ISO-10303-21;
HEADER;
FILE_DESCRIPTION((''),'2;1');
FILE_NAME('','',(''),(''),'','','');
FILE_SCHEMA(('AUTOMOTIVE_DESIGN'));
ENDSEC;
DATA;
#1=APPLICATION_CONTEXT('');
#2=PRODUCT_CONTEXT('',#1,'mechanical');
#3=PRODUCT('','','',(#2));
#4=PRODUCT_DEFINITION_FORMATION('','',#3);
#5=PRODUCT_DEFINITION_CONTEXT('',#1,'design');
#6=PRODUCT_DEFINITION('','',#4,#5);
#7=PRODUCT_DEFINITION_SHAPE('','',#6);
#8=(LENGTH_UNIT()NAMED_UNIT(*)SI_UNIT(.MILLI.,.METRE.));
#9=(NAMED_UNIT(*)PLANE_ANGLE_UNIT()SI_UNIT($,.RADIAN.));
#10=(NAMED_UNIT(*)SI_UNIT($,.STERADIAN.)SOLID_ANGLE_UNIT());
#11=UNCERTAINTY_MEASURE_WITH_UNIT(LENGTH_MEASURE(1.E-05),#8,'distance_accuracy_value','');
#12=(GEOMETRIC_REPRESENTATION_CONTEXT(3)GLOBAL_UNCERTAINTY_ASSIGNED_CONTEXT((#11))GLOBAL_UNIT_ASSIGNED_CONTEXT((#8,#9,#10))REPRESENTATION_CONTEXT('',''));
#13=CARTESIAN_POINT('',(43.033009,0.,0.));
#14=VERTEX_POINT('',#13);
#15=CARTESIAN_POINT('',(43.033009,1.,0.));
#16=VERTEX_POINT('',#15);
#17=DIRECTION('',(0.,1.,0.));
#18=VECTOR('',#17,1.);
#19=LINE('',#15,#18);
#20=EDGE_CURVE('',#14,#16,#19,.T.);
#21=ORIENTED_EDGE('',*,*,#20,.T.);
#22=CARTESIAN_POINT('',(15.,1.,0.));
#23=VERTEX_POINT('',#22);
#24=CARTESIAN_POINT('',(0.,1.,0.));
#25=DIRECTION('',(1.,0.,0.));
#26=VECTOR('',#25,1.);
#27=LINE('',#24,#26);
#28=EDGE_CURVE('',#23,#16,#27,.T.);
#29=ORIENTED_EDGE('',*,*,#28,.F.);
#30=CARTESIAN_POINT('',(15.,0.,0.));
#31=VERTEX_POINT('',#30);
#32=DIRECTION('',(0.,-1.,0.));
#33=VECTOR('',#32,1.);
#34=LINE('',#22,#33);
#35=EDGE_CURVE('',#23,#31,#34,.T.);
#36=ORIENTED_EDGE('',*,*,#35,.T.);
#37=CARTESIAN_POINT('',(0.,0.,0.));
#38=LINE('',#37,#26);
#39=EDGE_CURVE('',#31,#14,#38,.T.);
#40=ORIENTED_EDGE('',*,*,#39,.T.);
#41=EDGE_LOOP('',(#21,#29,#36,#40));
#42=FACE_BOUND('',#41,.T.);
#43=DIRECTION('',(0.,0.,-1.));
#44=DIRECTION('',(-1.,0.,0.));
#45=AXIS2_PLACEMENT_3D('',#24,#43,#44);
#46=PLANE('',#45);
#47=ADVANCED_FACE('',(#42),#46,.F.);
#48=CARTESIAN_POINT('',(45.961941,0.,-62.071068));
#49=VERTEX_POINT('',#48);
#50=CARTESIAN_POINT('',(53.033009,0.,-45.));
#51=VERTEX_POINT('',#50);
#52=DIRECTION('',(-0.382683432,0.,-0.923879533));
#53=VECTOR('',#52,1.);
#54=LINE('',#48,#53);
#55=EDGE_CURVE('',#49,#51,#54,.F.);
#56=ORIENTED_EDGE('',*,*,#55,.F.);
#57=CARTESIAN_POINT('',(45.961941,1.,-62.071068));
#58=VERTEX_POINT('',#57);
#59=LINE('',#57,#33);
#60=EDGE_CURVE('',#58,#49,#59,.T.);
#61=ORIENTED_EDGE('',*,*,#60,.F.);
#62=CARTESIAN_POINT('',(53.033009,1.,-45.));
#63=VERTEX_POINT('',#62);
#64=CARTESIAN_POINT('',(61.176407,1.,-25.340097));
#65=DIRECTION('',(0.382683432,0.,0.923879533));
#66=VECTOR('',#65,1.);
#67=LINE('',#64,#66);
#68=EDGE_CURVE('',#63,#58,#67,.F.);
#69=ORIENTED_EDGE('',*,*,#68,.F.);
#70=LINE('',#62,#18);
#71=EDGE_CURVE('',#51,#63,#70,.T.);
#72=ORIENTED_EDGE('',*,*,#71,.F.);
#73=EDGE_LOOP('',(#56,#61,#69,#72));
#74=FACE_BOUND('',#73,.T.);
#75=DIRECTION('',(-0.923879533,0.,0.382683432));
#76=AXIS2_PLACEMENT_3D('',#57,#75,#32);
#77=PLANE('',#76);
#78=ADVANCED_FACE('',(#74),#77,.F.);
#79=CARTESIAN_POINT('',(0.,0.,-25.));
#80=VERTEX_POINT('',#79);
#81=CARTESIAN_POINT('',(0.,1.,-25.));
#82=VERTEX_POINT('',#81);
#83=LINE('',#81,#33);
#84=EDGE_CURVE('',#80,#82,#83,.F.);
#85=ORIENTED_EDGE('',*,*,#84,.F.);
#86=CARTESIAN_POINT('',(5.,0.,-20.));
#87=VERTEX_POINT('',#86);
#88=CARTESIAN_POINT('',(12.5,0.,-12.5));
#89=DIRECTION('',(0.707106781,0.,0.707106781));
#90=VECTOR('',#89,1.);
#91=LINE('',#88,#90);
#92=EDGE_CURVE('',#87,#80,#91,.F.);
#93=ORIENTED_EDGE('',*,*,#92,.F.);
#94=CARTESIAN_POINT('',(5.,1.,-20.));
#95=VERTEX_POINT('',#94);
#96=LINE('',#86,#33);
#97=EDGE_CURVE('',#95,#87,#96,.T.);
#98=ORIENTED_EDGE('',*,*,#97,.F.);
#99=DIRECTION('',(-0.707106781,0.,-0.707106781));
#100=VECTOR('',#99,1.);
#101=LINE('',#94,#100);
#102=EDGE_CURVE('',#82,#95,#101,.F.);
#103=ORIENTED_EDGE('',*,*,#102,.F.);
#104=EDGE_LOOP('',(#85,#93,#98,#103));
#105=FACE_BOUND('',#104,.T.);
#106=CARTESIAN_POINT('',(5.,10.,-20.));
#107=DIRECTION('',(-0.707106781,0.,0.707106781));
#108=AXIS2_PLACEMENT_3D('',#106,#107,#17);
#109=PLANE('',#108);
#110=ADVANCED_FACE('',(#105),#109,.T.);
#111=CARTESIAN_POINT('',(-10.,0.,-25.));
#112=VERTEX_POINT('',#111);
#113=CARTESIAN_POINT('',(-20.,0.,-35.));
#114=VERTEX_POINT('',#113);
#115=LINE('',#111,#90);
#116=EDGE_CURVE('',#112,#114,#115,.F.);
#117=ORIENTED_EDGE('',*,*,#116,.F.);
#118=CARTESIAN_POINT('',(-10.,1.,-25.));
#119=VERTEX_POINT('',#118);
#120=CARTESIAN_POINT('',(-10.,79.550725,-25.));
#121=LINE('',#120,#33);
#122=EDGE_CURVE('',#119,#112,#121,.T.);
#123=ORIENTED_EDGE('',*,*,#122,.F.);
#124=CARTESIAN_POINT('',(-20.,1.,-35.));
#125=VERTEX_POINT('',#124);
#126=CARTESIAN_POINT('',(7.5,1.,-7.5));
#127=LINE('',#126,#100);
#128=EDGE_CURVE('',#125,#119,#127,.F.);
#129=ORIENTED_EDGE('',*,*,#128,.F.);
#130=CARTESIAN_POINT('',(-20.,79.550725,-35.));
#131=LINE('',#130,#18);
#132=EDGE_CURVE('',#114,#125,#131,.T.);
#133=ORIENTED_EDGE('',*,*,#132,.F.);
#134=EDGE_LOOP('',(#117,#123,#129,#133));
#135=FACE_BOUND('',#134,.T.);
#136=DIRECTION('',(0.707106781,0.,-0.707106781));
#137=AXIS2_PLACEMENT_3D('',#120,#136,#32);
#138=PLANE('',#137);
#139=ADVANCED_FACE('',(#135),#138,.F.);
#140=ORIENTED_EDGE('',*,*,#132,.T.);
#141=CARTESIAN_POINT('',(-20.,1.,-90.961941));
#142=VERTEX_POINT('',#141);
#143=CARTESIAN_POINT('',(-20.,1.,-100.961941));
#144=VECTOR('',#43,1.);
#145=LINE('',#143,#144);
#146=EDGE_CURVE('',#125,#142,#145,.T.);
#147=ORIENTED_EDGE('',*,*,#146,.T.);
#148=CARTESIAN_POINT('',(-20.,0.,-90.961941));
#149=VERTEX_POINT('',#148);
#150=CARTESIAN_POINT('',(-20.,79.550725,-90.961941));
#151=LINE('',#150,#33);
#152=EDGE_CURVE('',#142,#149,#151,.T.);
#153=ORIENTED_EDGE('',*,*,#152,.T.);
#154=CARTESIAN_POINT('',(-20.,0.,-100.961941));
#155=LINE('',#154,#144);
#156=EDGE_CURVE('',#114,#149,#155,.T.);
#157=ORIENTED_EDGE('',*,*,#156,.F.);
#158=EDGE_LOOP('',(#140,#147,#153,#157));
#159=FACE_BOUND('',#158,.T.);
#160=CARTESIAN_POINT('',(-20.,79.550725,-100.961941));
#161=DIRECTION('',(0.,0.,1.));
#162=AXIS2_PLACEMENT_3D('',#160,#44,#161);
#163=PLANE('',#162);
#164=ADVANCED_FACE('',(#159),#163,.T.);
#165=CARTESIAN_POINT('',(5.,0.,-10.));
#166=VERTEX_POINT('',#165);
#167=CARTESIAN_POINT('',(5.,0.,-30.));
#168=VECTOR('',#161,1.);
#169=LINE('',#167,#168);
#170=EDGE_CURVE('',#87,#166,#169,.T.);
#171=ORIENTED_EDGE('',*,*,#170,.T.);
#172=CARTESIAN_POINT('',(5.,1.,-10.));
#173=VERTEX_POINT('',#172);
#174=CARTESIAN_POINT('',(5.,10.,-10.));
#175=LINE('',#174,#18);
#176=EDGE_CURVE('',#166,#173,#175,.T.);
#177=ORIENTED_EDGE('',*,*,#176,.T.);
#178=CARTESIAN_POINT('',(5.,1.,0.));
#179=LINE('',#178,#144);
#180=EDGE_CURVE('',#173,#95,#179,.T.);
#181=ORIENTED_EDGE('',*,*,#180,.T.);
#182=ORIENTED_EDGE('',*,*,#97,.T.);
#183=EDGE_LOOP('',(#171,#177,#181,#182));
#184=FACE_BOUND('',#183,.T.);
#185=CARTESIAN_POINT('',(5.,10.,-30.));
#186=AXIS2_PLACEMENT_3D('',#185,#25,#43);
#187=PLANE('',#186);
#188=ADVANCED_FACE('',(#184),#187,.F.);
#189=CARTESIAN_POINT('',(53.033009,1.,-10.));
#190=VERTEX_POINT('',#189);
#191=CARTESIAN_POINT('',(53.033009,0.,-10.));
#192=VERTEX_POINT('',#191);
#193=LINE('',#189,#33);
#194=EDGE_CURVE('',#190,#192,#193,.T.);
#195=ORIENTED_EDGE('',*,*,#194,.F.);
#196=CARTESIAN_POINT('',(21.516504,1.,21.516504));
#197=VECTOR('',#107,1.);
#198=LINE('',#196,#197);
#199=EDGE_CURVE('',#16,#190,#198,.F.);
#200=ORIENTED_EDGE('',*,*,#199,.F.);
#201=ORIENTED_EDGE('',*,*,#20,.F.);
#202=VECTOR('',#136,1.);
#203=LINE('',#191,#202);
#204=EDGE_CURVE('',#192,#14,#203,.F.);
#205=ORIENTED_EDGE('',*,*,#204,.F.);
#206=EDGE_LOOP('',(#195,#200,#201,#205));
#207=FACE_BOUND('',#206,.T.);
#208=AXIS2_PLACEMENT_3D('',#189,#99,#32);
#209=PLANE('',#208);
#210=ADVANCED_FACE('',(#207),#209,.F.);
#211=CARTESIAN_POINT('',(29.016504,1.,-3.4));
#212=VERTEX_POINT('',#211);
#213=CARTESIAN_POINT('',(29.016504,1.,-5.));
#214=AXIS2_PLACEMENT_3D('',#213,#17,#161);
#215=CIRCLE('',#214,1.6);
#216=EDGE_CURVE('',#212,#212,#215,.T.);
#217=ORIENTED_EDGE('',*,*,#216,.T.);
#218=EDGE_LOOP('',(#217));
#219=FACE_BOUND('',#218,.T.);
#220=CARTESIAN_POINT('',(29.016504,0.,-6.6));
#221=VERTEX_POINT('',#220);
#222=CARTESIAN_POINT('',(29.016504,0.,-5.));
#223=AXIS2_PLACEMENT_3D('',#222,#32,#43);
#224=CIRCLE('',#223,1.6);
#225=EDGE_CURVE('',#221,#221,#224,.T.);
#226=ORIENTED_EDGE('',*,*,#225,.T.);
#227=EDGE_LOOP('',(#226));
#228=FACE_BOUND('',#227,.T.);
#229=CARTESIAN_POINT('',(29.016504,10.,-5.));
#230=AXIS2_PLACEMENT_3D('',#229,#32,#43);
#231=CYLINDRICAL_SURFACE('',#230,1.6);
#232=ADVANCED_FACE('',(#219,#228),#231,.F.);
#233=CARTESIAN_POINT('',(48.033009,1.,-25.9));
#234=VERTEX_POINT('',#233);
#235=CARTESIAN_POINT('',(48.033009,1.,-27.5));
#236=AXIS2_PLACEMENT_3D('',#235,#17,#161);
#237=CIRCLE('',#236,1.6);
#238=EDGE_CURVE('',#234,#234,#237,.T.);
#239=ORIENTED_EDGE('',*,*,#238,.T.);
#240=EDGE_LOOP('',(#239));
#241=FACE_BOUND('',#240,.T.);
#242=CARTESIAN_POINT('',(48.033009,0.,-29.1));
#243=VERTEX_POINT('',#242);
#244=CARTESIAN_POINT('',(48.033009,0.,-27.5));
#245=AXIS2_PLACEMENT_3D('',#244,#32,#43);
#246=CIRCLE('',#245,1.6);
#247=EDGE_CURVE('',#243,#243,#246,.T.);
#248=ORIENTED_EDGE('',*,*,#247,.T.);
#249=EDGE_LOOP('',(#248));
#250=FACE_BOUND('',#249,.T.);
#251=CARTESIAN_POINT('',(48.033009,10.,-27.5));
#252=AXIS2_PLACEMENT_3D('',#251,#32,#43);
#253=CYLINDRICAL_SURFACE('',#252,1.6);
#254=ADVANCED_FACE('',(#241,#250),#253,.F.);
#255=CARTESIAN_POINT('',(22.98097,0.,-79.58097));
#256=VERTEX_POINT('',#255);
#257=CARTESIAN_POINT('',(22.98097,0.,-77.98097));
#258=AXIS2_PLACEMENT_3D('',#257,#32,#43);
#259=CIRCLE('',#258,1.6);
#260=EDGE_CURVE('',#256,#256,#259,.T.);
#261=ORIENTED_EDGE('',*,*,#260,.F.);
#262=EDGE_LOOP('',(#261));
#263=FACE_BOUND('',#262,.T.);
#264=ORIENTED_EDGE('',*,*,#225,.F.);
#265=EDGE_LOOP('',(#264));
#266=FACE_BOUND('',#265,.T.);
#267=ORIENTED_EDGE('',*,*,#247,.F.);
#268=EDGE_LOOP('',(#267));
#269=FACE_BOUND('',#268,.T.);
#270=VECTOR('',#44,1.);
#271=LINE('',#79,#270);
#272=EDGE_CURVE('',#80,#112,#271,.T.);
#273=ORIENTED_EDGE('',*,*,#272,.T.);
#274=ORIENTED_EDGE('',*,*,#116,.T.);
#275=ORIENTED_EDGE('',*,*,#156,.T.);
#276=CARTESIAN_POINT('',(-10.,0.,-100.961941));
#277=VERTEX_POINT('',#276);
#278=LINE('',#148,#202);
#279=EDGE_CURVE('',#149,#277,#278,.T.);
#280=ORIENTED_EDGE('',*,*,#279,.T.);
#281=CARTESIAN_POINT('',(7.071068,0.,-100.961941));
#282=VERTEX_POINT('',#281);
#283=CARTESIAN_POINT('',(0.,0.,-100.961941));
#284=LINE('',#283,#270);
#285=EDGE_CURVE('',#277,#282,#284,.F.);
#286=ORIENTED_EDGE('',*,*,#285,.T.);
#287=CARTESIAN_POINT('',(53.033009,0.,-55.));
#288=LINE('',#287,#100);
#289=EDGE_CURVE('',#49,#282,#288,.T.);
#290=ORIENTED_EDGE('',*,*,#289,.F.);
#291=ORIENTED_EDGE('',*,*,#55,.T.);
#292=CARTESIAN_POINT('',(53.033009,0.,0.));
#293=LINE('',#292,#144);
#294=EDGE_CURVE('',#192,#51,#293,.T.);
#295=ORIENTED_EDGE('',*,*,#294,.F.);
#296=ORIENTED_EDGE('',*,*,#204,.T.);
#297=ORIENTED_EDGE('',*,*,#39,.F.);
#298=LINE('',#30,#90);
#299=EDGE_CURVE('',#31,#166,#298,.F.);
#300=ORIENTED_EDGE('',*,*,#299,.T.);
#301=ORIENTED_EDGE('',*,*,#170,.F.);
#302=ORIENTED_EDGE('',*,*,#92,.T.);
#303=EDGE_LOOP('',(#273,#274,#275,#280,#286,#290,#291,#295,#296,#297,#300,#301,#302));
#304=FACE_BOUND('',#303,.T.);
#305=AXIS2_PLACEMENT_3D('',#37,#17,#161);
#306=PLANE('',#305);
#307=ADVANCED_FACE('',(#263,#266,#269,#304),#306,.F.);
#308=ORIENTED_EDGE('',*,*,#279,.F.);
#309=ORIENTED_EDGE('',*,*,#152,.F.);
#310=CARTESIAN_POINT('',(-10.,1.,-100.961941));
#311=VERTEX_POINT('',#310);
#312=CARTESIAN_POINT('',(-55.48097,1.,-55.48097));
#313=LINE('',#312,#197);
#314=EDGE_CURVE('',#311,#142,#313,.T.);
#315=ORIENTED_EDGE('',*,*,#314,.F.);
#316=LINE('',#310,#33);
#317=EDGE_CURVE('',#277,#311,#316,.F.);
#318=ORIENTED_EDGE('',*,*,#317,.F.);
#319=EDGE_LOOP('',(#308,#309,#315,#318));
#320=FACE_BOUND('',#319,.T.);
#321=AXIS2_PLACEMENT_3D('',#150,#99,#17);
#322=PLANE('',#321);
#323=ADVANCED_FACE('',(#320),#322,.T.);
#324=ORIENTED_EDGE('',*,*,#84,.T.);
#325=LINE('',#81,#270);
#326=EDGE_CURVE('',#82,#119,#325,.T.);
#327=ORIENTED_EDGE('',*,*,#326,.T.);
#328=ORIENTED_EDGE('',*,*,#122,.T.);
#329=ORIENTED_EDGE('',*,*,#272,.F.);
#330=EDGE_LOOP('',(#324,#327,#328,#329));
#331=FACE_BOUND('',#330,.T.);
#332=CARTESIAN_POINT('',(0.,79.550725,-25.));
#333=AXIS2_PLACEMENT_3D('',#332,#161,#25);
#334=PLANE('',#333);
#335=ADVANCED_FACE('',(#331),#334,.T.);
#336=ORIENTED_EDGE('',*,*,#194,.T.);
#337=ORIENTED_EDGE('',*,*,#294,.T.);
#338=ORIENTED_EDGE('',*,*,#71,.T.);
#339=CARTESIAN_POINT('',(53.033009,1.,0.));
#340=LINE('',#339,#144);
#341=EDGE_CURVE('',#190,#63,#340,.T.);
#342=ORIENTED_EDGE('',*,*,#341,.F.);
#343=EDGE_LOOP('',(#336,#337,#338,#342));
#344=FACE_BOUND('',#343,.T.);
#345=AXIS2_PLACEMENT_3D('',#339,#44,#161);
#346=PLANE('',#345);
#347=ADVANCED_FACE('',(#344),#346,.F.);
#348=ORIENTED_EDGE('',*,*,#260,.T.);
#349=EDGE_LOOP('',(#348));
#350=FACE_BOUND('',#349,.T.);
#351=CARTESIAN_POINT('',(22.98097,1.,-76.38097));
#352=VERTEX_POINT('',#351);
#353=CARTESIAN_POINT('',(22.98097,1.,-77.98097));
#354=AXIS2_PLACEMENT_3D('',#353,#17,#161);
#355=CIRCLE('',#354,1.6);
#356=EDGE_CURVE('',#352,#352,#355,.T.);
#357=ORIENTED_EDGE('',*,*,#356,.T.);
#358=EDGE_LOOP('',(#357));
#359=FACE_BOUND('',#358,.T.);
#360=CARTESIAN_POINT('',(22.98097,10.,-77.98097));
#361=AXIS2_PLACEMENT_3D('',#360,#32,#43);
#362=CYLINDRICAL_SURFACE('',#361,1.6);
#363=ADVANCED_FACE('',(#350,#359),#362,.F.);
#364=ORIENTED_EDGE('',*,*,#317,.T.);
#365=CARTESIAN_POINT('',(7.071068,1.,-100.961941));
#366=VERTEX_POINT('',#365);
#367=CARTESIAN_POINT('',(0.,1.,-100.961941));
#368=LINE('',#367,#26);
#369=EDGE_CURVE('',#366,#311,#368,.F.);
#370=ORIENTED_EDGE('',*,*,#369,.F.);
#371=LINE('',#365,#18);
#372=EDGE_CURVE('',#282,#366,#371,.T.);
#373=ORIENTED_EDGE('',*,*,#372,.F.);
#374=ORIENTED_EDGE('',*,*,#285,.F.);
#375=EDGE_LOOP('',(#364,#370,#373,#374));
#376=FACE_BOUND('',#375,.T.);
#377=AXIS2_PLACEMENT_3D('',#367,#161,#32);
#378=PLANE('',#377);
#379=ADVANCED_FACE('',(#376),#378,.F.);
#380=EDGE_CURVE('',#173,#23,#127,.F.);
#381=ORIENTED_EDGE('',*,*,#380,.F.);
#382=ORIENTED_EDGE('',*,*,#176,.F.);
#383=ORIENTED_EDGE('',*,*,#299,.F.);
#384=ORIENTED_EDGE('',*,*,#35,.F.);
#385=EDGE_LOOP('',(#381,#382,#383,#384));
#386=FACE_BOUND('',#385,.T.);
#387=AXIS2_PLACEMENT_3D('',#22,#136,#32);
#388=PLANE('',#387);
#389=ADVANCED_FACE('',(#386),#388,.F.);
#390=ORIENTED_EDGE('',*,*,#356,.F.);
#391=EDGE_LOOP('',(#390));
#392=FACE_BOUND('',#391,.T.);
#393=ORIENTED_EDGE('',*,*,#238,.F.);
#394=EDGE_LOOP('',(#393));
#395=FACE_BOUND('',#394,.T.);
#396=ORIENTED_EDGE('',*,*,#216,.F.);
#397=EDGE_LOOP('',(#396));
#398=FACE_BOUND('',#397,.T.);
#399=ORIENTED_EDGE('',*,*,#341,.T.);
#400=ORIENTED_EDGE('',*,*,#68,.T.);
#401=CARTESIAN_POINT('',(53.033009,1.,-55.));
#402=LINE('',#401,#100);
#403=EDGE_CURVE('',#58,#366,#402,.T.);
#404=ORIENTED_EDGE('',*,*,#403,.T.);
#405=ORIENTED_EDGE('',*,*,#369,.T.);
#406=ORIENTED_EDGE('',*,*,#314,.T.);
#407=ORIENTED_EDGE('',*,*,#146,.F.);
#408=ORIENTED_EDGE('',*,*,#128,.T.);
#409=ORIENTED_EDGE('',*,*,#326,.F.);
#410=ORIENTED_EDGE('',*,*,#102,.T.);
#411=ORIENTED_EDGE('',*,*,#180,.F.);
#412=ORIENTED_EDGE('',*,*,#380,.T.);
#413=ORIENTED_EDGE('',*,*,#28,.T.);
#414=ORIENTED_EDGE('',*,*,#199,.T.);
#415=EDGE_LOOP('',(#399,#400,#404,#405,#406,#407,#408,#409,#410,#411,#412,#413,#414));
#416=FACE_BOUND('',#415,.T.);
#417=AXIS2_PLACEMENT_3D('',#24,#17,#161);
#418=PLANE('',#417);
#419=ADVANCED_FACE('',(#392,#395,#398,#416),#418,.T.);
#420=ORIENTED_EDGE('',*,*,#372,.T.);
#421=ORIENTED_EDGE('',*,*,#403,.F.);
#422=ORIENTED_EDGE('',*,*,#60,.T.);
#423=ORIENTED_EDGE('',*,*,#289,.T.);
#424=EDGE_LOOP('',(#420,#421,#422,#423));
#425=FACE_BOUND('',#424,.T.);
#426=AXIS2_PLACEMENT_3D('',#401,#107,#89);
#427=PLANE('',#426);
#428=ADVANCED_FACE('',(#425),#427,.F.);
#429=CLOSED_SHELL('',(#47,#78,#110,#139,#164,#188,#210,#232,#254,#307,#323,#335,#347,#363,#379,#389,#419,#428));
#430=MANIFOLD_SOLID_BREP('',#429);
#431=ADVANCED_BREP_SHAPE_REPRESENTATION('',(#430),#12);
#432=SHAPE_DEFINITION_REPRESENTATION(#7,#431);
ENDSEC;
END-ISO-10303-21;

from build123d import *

# Parameters (mm, degrees)
EXTRUDE_1_DEPTH     = 1
SKETCH_2_W          = 5
SKETCH_2_H          = 30
CUT_EXTRUDE_1_DEPTH = 10
CHAMFER_1_SIZE      = 10
CHAMFER_1_SIZE_2    = 7.071067812
CHAMFER_2_SIZE      = 10
SKETCH_3_R          = 1.6
CUT_EXTRUDE_2_DEPTH = 10
SKETCH_4_W          = 20
SKETCH_4_H          = 75.961940777
EXTRUDE_2_DEPTH     = 1
CHAMFER_3_SIZE      = 10


with BuildPart() as part:
    # 草图1 → 凸台-拉伸1 (new body)
    with BuildSketch(Plane(origin=(0, 0, 0), x_dir=(1, 0, 0), z_dir=(0, 1, 0))):
        Polygon((0, 0), (53.033008589, 0), (53.033008589, 55), (0, 108.033008589), align=None)
    extrude(amount=EXTRUDE_1_DEPTH)

    # 草图2 → 切除-拉伸1 (cut)
    with BuildSketch(Plane.XZ):
        with Locations((2.5, -15)):
            Rectangle(SKETCH_2_W, SKETCH_2_H)
    extrude(amount=-CUT_EXTRUDE_1_DEPTH, mode=Mode.SUBTRACT)

    # 倒角1
    # the kernel refuses this chamfer: 10, 7.071067812 mm, written as the material it adds along each edge
    with BuildSketch(Plane(origin=(5, 0, -30), x_dir=(0.027495876610586403, 0, 0.9996219169112968), z_dir=(0, 1, 0))) as chamfer_1_piece_1_section:
        Polygon((CHAMFER_1_SIZE * 0.999621916911, -CHAMFER_1_SIZE * 0.0274958766106), (-CHAMFER_1_SIZE * 0.0274958766106, -CHAMFER_1_SIZE * 0.999621916911), (0, 0), align=None)
    chamfer_1_piece_1 = extrude(amount=1, mode=Mode.PRIVATE)
    chamfer_1_piece_1 = split(chamfer_1_piece_1, bisect_by=Plane(origin=(0, 0.5, -26.065989159), z_dir=(1, 0, 0)), keep=Keep.TOP, mode=Mode.PRIVATE)
    add(chamfer_1_piece_1)
    # the kernel refuses this chamfer: 10, 7.071067812 mm, written as the material it takes off along each edge
    with BuildSketch(Plane(origin=(0, -25.71682988, -108.033008589), x_dir=(-0.056478249472490825, 0, 0.9984038297885897), z_dir=(0, 1, 0))) as chamfer_1_2_piece_1:
        Polygon((CHAMFER_1_SIZE_2 * 0.99840382977, CHAMFER_1_SIZE_2 * 0.0564782494714), (CHAMFER_1_SIZE * 0.666041965215, CHAMFER_1_SIZE * 0.745914271598), (0, 0), align=None)
    extrude(amount=52.433659759, mode=Mode.SUBTRACT)
    with BuildSketch(Plane(origin=(5, -25.71682988, 0), x_dir=(0.9996219169112968, 0, 0.027495876610586372), z_dir=(0, 1, 0))) as chamfer_1_2_piece_2:
        Polygon((CHAMFER_1_SIZE * 0.999621916911, CHAMFER_1_SIZE * 0.0274958766106), (-CHAMFER_1_SIZE * 0.0274958766106, CHAMFER_1_SIZE * 0.999621916911), (0, 0), align=None)
    extrude(amount=52.433659759, mode=Mode.SUBTRACT)
    with BuildSketch(Plane(origin=(53.033008589, -25.71682988, 0), x_dir=(-0.9996219169112968, 0, 0.027495876610586372), z_dir=(0, 1, 0))) as chamfer_1_2_piece_3:
        Polygon((CHAMFER_1_SIZE * 0.999621916911, -CHAMFER_1_SIZE * 0.0274958766106), (-CHAMFER_1_SIZE * 0.0274958766106, -CHAMFER_1_SIZE * 0.999621916911), (0, 0), align=None)
    extrude(amount=52.433659759, mode=Mode.SUBTRACT)

    # 倒角2
    chamfer_2_edges = [part.edges().sort_by_distance(p)[0] for p in [
        (53.033008589, 0.5, -55),
    ]]
    chamfer(chamfer_2_edges, length=CHAMFER_2_SIZE)

    # 草图3 → 切除-拉伸2 (cut)
    with BuildSketch(Plane.XZ):
        with Locations(Location((22.980970389, -77.980970389, 0), (0, 0, 270))):
            Circle(SKETCH_3_R)
        with Locations(Location((48.033008589, -27.5, 0), (0, 0, 270))):
            Circle(SKETCH_3_R)
        with Locations(Location((29.016504294, -5, 0), (0, 0, 270))):
            Circle(SKETCH_3_R)
    extrude(amount=-CUT_EXTRUDE_2_DEPTH, mode=Mode.SUBTRACT)

    # 草图4 → 凸台-拉伸2 (add)
    with BuildSketch(Plane.XZ):
        with Locations((-10, -62.980970389)):
            Rectangle(SKETCH_4_W, SKETCH_4_H)
    extrude(amount=-EXTRUDE_2_DEPTH)

    # 倒角3
    chamfer_3_edges = [part.edges().sort_by_distance(p)[0] for p in [
        (-20, 0.5, -25),
        (-20, 0.5, -100.961940777),
    ]]
    chamfer(chamfer_3_edges, length=CHAMFER_3_SIZE)


solid = part.part
